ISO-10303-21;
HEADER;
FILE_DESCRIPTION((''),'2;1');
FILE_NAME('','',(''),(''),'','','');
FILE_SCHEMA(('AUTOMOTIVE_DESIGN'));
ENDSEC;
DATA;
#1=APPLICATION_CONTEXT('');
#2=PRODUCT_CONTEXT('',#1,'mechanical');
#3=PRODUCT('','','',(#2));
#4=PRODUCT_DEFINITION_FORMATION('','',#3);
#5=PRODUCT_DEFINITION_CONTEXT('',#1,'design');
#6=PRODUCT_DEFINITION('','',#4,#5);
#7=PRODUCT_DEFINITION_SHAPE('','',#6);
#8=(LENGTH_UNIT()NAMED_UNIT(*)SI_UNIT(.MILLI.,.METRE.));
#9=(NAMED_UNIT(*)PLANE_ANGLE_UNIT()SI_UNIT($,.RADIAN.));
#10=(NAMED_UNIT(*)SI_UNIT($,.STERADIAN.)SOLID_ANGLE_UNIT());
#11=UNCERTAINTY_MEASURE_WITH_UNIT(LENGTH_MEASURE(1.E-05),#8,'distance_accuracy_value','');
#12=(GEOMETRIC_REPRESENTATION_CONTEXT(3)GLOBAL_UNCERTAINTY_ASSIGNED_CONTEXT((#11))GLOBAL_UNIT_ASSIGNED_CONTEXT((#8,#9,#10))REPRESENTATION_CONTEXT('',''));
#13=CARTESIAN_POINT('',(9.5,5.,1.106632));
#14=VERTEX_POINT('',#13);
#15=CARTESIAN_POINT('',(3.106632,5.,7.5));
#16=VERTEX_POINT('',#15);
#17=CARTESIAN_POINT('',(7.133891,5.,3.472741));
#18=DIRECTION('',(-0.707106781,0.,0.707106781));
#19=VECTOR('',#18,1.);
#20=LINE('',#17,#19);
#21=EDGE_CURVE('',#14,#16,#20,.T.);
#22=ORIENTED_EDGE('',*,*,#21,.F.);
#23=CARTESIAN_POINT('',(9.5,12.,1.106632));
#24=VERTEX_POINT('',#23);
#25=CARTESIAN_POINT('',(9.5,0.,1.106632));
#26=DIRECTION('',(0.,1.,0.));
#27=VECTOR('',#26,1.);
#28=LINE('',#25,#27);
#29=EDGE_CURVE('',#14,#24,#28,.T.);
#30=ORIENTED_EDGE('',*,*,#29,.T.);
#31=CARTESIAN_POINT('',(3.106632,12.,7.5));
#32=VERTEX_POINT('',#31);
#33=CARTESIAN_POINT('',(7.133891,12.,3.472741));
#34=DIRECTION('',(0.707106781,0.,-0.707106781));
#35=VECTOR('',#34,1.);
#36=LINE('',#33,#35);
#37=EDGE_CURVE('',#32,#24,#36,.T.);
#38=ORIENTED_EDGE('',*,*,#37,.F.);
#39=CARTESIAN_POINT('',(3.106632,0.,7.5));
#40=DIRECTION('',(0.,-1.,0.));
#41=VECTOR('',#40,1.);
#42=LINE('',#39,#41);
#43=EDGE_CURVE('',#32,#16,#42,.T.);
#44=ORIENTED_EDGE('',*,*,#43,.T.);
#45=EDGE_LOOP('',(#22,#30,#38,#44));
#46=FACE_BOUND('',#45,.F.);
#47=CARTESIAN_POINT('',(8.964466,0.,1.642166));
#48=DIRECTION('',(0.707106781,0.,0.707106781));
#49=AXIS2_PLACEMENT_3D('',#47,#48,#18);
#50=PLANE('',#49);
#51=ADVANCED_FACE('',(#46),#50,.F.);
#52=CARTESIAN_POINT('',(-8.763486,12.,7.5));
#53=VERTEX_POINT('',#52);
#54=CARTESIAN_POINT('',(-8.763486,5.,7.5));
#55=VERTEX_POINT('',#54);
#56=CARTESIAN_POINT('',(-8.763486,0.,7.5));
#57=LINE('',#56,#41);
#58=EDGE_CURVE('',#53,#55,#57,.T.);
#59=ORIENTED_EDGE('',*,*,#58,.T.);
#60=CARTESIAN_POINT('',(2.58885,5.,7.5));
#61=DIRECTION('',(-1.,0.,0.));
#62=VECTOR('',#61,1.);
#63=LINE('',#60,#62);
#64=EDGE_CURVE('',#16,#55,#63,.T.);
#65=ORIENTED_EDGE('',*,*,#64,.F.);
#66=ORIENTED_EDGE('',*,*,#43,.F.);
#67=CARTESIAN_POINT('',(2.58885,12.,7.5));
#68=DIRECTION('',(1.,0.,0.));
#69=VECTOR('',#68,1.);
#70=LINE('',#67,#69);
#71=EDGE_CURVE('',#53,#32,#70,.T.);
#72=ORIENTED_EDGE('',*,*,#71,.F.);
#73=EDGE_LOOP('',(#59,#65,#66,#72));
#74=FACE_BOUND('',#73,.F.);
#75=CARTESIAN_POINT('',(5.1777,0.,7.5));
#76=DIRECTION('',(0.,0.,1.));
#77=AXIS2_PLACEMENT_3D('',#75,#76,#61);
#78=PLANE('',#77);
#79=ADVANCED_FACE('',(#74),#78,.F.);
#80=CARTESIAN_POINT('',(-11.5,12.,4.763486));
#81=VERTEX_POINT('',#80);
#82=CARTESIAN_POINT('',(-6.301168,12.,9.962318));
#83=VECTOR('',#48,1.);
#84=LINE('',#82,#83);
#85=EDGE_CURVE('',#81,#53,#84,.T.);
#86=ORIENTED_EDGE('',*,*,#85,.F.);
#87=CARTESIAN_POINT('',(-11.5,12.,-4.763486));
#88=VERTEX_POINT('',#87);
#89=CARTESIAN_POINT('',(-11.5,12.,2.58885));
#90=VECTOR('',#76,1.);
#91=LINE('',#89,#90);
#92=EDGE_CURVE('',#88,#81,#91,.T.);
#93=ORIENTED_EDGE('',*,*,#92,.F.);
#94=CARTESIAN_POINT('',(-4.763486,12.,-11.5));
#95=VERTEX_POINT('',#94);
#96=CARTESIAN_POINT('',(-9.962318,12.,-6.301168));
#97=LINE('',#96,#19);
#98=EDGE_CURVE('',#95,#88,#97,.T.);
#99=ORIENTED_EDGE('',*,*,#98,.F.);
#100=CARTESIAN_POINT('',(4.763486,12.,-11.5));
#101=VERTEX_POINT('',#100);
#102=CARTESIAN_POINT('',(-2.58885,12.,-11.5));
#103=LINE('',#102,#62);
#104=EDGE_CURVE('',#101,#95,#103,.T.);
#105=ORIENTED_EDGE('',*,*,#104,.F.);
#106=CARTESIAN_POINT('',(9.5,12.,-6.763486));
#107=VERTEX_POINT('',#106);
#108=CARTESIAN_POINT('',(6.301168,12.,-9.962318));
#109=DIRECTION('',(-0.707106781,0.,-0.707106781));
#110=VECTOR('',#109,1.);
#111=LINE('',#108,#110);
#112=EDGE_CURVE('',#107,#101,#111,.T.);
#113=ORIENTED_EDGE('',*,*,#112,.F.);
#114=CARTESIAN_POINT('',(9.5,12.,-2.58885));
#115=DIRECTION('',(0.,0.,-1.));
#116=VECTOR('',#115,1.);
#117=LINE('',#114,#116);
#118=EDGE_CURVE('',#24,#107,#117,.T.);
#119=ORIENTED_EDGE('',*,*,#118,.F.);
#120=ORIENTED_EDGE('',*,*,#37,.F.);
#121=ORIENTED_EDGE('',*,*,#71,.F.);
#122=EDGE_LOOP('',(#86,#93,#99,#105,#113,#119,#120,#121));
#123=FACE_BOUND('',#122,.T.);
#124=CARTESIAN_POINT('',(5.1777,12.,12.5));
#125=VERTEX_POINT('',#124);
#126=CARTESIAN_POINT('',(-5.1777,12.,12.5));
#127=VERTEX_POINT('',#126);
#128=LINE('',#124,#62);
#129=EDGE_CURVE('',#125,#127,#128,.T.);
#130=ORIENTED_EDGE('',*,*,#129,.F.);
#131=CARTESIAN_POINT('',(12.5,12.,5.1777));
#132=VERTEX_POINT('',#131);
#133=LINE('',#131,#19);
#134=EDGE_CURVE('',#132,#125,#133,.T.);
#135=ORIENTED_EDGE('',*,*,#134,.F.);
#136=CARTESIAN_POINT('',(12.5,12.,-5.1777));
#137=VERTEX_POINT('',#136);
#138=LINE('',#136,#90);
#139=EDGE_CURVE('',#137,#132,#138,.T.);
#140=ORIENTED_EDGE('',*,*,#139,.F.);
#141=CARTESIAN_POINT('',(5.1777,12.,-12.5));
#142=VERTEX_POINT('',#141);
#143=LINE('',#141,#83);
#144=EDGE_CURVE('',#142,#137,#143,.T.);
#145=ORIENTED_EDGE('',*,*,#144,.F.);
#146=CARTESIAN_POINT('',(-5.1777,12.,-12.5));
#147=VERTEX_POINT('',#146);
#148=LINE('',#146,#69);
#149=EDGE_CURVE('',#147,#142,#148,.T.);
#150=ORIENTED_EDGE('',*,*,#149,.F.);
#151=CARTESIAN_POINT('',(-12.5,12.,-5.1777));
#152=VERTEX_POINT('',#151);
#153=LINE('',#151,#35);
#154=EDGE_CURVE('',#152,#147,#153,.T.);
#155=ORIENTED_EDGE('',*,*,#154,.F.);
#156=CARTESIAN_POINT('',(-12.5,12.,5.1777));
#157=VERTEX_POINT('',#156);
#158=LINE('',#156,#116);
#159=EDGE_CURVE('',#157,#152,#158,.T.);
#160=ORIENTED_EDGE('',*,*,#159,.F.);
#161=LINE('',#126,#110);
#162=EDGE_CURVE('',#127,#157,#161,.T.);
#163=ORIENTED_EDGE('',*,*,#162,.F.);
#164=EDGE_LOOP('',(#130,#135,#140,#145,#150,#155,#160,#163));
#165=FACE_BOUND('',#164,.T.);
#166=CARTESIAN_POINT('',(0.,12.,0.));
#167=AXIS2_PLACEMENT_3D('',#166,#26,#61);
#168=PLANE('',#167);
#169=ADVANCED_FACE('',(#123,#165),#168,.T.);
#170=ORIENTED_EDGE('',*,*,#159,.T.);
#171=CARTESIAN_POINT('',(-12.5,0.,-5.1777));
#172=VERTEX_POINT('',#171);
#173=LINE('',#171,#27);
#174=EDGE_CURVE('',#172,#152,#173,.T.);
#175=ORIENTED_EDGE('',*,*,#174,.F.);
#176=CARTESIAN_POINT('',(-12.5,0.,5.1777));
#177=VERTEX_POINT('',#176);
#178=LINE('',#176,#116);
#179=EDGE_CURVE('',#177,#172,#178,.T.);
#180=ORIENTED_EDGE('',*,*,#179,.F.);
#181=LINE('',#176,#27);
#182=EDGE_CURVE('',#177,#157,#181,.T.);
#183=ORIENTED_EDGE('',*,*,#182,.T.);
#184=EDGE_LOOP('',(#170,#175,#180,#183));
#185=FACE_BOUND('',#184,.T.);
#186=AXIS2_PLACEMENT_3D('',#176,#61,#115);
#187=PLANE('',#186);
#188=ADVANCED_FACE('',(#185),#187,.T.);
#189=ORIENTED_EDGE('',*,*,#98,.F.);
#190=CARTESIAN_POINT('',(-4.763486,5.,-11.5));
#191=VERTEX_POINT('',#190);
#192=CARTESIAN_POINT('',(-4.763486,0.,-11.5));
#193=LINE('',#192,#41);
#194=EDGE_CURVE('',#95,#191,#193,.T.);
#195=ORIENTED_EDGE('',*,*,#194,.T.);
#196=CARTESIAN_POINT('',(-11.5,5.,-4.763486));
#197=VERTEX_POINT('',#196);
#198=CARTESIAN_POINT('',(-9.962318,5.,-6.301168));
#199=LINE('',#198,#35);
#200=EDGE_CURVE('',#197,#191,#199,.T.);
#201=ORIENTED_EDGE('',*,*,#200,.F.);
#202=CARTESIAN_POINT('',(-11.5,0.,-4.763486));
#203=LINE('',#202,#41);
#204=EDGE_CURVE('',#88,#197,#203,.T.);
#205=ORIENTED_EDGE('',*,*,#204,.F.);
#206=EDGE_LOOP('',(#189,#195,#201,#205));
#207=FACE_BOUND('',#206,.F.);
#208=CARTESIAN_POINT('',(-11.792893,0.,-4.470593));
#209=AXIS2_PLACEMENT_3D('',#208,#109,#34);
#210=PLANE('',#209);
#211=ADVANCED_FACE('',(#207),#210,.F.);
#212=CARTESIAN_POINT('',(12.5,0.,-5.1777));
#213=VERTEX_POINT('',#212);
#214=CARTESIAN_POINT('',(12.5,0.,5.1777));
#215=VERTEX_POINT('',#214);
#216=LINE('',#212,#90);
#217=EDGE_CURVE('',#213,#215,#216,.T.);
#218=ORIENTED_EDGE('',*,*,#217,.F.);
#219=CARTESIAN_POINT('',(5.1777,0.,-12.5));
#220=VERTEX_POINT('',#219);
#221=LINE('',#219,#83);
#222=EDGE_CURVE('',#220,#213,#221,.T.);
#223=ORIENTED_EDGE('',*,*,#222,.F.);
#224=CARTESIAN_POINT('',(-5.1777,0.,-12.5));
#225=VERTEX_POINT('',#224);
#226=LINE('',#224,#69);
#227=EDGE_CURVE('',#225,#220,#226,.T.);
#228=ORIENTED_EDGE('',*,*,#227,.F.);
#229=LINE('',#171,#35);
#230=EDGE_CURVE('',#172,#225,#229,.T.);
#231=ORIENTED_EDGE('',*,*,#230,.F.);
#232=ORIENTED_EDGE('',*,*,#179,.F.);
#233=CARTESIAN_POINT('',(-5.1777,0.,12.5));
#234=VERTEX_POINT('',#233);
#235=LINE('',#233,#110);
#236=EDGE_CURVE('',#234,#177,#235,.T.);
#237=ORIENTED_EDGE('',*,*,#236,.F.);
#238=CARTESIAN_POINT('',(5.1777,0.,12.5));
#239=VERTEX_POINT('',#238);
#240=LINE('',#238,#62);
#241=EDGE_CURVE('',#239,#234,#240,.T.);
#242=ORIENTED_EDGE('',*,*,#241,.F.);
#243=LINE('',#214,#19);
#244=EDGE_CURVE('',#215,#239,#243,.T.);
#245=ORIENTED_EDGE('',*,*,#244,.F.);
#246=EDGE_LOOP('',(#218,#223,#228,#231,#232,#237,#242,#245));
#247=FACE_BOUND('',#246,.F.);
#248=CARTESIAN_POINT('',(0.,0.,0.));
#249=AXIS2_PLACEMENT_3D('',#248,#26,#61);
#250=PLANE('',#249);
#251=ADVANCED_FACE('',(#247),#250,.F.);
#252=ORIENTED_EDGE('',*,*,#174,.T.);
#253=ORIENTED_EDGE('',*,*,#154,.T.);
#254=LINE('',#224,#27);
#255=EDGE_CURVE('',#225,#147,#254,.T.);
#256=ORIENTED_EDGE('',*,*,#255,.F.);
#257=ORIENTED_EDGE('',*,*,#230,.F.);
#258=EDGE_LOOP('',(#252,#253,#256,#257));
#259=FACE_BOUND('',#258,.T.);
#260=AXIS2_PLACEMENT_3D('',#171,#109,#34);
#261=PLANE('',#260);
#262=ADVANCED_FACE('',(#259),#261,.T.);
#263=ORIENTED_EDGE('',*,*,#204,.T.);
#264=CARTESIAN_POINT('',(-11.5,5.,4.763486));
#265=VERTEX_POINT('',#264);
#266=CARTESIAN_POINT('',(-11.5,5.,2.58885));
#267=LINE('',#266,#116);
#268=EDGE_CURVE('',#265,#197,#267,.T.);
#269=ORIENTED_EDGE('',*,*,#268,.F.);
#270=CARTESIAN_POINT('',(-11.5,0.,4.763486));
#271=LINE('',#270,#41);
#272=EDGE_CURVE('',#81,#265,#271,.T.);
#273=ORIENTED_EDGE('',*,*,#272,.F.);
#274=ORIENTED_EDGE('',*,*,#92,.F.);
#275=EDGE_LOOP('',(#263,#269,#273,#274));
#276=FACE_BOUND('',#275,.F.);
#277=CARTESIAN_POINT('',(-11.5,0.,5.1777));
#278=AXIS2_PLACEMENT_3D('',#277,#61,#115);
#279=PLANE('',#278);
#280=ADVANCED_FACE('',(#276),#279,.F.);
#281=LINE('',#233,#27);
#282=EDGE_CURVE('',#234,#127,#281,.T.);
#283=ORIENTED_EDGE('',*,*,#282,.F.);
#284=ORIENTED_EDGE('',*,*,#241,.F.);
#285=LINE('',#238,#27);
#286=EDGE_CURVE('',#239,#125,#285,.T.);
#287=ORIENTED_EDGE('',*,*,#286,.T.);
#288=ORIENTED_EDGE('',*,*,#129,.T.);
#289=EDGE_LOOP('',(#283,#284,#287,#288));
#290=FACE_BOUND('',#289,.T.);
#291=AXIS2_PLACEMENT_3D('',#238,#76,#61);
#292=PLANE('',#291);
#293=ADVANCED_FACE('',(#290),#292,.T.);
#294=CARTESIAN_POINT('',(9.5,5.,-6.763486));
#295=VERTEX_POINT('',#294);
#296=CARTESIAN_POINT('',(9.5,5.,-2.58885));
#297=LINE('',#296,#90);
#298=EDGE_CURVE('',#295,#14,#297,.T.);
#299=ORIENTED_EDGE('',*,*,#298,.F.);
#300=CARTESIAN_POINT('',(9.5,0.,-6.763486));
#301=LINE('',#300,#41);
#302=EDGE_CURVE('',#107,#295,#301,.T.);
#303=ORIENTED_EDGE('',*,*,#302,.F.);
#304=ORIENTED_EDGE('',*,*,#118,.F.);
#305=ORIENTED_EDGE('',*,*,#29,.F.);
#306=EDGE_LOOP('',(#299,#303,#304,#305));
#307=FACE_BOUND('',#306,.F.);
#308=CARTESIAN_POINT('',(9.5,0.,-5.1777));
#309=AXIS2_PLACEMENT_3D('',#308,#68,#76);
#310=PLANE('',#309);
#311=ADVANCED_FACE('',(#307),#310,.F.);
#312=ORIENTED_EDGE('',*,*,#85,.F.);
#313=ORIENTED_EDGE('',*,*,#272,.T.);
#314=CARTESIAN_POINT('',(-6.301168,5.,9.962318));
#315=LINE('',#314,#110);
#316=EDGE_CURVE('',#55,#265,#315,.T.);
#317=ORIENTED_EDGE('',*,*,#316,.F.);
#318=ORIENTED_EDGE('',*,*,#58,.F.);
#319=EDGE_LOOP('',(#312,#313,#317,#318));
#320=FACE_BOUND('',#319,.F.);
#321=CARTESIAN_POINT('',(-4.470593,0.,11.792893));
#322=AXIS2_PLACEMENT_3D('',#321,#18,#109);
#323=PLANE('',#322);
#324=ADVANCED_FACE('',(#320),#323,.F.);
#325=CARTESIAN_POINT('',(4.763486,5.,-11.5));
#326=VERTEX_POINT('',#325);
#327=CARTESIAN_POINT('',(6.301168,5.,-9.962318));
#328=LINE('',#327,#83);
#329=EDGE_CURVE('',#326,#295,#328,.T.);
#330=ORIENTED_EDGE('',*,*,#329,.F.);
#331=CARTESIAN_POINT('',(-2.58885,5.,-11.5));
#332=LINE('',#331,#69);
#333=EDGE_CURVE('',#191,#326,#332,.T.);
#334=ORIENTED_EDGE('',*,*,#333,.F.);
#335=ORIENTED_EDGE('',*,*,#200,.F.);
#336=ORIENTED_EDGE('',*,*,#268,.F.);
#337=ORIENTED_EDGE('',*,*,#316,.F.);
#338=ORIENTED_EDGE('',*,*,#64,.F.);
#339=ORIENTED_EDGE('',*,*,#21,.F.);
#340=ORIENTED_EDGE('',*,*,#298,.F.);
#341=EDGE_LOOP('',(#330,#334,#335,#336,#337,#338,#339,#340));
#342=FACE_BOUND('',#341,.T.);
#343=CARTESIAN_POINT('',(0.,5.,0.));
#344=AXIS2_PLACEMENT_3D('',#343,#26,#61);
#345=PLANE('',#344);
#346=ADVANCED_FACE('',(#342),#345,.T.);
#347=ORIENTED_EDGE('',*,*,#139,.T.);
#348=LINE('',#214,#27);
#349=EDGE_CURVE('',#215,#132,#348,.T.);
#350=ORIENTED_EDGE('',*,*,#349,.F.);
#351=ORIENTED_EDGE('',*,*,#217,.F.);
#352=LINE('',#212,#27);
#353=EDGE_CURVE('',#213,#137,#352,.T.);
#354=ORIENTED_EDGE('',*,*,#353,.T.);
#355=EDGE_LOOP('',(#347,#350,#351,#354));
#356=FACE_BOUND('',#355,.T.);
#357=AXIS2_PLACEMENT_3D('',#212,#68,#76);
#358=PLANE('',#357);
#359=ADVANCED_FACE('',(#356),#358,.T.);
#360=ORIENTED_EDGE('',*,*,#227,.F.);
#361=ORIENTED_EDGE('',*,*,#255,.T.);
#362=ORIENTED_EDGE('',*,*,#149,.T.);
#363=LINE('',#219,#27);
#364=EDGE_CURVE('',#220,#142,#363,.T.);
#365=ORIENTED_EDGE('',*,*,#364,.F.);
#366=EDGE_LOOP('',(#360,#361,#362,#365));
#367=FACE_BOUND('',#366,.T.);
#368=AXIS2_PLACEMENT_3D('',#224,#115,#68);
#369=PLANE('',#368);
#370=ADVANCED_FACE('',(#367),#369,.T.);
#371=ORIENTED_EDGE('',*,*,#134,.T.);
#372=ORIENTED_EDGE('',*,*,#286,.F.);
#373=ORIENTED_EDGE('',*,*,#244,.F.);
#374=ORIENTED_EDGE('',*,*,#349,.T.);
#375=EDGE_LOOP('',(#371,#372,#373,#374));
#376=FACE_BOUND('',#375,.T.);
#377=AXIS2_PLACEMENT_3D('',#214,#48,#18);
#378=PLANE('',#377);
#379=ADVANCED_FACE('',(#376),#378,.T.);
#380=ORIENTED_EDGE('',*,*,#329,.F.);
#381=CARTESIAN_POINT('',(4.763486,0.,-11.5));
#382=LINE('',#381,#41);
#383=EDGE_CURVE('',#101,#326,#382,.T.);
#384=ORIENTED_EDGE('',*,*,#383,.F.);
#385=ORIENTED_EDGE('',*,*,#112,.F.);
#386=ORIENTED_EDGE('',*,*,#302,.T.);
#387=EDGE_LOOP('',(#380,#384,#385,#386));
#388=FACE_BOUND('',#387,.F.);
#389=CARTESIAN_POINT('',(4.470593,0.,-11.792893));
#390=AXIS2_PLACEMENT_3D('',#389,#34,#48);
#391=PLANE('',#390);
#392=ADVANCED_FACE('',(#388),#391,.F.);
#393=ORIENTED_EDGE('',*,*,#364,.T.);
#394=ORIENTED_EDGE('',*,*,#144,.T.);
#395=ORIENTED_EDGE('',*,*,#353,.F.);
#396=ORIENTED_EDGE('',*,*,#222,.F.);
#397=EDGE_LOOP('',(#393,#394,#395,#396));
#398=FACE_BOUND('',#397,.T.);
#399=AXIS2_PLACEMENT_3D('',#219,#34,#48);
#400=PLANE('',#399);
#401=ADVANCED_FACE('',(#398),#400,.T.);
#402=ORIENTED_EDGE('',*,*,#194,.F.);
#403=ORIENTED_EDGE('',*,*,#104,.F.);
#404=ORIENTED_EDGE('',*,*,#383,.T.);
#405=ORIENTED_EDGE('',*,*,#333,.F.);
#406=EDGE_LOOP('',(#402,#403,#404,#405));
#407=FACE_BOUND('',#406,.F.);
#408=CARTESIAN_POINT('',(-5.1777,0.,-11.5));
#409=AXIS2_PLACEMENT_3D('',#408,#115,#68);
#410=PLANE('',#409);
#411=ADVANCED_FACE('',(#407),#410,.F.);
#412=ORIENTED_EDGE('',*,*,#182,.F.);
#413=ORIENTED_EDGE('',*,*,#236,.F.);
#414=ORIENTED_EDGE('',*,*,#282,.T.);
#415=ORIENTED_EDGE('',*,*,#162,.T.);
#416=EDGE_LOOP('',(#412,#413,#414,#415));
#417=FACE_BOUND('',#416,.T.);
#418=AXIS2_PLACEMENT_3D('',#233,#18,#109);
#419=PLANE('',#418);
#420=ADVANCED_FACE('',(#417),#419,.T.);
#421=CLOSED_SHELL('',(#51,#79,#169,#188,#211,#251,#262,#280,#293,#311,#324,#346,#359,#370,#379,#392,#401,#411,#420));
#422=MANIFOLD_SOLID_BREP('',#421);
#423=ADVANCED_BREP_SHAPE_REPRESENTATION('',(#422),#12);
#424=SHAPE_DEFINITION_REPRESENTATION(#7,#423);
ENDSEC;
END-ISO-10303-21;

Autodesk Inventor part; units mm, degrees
ref_plane "YZ Plane" through (0, 0, 0) normal (1, 0, 0) x (0, 1, 0)
ref_plane "XZ Plane" through (0, 0, 0) normal (0, 1, 0) x (-1, 0, 0)
ref_plane "XY Plane" through (0, 0, 0) normal (0, 0, 1) x (1, 0, 0)
sketch "草圖1" plane through (0, 0, 0) normal (0, 1, 0) x (-1, 0, 0)
  line L0 (-12.5, 5.1777) -> (-5.1777, 12.5)
  line L1 (-5.1777, 12.5) -> (5.1777, 12.5)
  line L2 (5.1777, 12.5) -> (12.5, 5.1777)
  line L3 (12.5, 5.1777) -> (12.5, -5.1777)
  line L4 (12.5, -5.1777) -> (5.1777, -12.5)
  line L5 (5.1777, -12.5) -> (-5.1777, -12.5)
  line L6 (-5.1777, -12.5) -> (-12.5, -5.1777)
  line L7 (-12.5, -5.1777) -> (-12.5, 5.1777)
  line L8 (123.9504, 0) -> (-90.7739, 0) construction
  point P0 (0, 0)
  point P1 (0, 0)
  dimension "d1" = 25
extrude "擠出1" add sketch "草圖1" along normal blind 12
shell "薄殼3" thickness 5 removed faces 1 at (-0.7149, 12, -1.7259) ; own thickness 5 on faces at (1.7259, 4, 12.5) (10.0592, 4, 7.6184) ; own thickness 3 on faces at (12.5, 4, -1.7259) ; own thickness 1 on faces at (-7.6184, 4, 10.0592) (-12.5, 4, 1.7259) (-10.0592, 4, -7.6184) (-1.7259, 4, -12.5) (7.6184, 4, -10.0592)
properties part number "示範一"
